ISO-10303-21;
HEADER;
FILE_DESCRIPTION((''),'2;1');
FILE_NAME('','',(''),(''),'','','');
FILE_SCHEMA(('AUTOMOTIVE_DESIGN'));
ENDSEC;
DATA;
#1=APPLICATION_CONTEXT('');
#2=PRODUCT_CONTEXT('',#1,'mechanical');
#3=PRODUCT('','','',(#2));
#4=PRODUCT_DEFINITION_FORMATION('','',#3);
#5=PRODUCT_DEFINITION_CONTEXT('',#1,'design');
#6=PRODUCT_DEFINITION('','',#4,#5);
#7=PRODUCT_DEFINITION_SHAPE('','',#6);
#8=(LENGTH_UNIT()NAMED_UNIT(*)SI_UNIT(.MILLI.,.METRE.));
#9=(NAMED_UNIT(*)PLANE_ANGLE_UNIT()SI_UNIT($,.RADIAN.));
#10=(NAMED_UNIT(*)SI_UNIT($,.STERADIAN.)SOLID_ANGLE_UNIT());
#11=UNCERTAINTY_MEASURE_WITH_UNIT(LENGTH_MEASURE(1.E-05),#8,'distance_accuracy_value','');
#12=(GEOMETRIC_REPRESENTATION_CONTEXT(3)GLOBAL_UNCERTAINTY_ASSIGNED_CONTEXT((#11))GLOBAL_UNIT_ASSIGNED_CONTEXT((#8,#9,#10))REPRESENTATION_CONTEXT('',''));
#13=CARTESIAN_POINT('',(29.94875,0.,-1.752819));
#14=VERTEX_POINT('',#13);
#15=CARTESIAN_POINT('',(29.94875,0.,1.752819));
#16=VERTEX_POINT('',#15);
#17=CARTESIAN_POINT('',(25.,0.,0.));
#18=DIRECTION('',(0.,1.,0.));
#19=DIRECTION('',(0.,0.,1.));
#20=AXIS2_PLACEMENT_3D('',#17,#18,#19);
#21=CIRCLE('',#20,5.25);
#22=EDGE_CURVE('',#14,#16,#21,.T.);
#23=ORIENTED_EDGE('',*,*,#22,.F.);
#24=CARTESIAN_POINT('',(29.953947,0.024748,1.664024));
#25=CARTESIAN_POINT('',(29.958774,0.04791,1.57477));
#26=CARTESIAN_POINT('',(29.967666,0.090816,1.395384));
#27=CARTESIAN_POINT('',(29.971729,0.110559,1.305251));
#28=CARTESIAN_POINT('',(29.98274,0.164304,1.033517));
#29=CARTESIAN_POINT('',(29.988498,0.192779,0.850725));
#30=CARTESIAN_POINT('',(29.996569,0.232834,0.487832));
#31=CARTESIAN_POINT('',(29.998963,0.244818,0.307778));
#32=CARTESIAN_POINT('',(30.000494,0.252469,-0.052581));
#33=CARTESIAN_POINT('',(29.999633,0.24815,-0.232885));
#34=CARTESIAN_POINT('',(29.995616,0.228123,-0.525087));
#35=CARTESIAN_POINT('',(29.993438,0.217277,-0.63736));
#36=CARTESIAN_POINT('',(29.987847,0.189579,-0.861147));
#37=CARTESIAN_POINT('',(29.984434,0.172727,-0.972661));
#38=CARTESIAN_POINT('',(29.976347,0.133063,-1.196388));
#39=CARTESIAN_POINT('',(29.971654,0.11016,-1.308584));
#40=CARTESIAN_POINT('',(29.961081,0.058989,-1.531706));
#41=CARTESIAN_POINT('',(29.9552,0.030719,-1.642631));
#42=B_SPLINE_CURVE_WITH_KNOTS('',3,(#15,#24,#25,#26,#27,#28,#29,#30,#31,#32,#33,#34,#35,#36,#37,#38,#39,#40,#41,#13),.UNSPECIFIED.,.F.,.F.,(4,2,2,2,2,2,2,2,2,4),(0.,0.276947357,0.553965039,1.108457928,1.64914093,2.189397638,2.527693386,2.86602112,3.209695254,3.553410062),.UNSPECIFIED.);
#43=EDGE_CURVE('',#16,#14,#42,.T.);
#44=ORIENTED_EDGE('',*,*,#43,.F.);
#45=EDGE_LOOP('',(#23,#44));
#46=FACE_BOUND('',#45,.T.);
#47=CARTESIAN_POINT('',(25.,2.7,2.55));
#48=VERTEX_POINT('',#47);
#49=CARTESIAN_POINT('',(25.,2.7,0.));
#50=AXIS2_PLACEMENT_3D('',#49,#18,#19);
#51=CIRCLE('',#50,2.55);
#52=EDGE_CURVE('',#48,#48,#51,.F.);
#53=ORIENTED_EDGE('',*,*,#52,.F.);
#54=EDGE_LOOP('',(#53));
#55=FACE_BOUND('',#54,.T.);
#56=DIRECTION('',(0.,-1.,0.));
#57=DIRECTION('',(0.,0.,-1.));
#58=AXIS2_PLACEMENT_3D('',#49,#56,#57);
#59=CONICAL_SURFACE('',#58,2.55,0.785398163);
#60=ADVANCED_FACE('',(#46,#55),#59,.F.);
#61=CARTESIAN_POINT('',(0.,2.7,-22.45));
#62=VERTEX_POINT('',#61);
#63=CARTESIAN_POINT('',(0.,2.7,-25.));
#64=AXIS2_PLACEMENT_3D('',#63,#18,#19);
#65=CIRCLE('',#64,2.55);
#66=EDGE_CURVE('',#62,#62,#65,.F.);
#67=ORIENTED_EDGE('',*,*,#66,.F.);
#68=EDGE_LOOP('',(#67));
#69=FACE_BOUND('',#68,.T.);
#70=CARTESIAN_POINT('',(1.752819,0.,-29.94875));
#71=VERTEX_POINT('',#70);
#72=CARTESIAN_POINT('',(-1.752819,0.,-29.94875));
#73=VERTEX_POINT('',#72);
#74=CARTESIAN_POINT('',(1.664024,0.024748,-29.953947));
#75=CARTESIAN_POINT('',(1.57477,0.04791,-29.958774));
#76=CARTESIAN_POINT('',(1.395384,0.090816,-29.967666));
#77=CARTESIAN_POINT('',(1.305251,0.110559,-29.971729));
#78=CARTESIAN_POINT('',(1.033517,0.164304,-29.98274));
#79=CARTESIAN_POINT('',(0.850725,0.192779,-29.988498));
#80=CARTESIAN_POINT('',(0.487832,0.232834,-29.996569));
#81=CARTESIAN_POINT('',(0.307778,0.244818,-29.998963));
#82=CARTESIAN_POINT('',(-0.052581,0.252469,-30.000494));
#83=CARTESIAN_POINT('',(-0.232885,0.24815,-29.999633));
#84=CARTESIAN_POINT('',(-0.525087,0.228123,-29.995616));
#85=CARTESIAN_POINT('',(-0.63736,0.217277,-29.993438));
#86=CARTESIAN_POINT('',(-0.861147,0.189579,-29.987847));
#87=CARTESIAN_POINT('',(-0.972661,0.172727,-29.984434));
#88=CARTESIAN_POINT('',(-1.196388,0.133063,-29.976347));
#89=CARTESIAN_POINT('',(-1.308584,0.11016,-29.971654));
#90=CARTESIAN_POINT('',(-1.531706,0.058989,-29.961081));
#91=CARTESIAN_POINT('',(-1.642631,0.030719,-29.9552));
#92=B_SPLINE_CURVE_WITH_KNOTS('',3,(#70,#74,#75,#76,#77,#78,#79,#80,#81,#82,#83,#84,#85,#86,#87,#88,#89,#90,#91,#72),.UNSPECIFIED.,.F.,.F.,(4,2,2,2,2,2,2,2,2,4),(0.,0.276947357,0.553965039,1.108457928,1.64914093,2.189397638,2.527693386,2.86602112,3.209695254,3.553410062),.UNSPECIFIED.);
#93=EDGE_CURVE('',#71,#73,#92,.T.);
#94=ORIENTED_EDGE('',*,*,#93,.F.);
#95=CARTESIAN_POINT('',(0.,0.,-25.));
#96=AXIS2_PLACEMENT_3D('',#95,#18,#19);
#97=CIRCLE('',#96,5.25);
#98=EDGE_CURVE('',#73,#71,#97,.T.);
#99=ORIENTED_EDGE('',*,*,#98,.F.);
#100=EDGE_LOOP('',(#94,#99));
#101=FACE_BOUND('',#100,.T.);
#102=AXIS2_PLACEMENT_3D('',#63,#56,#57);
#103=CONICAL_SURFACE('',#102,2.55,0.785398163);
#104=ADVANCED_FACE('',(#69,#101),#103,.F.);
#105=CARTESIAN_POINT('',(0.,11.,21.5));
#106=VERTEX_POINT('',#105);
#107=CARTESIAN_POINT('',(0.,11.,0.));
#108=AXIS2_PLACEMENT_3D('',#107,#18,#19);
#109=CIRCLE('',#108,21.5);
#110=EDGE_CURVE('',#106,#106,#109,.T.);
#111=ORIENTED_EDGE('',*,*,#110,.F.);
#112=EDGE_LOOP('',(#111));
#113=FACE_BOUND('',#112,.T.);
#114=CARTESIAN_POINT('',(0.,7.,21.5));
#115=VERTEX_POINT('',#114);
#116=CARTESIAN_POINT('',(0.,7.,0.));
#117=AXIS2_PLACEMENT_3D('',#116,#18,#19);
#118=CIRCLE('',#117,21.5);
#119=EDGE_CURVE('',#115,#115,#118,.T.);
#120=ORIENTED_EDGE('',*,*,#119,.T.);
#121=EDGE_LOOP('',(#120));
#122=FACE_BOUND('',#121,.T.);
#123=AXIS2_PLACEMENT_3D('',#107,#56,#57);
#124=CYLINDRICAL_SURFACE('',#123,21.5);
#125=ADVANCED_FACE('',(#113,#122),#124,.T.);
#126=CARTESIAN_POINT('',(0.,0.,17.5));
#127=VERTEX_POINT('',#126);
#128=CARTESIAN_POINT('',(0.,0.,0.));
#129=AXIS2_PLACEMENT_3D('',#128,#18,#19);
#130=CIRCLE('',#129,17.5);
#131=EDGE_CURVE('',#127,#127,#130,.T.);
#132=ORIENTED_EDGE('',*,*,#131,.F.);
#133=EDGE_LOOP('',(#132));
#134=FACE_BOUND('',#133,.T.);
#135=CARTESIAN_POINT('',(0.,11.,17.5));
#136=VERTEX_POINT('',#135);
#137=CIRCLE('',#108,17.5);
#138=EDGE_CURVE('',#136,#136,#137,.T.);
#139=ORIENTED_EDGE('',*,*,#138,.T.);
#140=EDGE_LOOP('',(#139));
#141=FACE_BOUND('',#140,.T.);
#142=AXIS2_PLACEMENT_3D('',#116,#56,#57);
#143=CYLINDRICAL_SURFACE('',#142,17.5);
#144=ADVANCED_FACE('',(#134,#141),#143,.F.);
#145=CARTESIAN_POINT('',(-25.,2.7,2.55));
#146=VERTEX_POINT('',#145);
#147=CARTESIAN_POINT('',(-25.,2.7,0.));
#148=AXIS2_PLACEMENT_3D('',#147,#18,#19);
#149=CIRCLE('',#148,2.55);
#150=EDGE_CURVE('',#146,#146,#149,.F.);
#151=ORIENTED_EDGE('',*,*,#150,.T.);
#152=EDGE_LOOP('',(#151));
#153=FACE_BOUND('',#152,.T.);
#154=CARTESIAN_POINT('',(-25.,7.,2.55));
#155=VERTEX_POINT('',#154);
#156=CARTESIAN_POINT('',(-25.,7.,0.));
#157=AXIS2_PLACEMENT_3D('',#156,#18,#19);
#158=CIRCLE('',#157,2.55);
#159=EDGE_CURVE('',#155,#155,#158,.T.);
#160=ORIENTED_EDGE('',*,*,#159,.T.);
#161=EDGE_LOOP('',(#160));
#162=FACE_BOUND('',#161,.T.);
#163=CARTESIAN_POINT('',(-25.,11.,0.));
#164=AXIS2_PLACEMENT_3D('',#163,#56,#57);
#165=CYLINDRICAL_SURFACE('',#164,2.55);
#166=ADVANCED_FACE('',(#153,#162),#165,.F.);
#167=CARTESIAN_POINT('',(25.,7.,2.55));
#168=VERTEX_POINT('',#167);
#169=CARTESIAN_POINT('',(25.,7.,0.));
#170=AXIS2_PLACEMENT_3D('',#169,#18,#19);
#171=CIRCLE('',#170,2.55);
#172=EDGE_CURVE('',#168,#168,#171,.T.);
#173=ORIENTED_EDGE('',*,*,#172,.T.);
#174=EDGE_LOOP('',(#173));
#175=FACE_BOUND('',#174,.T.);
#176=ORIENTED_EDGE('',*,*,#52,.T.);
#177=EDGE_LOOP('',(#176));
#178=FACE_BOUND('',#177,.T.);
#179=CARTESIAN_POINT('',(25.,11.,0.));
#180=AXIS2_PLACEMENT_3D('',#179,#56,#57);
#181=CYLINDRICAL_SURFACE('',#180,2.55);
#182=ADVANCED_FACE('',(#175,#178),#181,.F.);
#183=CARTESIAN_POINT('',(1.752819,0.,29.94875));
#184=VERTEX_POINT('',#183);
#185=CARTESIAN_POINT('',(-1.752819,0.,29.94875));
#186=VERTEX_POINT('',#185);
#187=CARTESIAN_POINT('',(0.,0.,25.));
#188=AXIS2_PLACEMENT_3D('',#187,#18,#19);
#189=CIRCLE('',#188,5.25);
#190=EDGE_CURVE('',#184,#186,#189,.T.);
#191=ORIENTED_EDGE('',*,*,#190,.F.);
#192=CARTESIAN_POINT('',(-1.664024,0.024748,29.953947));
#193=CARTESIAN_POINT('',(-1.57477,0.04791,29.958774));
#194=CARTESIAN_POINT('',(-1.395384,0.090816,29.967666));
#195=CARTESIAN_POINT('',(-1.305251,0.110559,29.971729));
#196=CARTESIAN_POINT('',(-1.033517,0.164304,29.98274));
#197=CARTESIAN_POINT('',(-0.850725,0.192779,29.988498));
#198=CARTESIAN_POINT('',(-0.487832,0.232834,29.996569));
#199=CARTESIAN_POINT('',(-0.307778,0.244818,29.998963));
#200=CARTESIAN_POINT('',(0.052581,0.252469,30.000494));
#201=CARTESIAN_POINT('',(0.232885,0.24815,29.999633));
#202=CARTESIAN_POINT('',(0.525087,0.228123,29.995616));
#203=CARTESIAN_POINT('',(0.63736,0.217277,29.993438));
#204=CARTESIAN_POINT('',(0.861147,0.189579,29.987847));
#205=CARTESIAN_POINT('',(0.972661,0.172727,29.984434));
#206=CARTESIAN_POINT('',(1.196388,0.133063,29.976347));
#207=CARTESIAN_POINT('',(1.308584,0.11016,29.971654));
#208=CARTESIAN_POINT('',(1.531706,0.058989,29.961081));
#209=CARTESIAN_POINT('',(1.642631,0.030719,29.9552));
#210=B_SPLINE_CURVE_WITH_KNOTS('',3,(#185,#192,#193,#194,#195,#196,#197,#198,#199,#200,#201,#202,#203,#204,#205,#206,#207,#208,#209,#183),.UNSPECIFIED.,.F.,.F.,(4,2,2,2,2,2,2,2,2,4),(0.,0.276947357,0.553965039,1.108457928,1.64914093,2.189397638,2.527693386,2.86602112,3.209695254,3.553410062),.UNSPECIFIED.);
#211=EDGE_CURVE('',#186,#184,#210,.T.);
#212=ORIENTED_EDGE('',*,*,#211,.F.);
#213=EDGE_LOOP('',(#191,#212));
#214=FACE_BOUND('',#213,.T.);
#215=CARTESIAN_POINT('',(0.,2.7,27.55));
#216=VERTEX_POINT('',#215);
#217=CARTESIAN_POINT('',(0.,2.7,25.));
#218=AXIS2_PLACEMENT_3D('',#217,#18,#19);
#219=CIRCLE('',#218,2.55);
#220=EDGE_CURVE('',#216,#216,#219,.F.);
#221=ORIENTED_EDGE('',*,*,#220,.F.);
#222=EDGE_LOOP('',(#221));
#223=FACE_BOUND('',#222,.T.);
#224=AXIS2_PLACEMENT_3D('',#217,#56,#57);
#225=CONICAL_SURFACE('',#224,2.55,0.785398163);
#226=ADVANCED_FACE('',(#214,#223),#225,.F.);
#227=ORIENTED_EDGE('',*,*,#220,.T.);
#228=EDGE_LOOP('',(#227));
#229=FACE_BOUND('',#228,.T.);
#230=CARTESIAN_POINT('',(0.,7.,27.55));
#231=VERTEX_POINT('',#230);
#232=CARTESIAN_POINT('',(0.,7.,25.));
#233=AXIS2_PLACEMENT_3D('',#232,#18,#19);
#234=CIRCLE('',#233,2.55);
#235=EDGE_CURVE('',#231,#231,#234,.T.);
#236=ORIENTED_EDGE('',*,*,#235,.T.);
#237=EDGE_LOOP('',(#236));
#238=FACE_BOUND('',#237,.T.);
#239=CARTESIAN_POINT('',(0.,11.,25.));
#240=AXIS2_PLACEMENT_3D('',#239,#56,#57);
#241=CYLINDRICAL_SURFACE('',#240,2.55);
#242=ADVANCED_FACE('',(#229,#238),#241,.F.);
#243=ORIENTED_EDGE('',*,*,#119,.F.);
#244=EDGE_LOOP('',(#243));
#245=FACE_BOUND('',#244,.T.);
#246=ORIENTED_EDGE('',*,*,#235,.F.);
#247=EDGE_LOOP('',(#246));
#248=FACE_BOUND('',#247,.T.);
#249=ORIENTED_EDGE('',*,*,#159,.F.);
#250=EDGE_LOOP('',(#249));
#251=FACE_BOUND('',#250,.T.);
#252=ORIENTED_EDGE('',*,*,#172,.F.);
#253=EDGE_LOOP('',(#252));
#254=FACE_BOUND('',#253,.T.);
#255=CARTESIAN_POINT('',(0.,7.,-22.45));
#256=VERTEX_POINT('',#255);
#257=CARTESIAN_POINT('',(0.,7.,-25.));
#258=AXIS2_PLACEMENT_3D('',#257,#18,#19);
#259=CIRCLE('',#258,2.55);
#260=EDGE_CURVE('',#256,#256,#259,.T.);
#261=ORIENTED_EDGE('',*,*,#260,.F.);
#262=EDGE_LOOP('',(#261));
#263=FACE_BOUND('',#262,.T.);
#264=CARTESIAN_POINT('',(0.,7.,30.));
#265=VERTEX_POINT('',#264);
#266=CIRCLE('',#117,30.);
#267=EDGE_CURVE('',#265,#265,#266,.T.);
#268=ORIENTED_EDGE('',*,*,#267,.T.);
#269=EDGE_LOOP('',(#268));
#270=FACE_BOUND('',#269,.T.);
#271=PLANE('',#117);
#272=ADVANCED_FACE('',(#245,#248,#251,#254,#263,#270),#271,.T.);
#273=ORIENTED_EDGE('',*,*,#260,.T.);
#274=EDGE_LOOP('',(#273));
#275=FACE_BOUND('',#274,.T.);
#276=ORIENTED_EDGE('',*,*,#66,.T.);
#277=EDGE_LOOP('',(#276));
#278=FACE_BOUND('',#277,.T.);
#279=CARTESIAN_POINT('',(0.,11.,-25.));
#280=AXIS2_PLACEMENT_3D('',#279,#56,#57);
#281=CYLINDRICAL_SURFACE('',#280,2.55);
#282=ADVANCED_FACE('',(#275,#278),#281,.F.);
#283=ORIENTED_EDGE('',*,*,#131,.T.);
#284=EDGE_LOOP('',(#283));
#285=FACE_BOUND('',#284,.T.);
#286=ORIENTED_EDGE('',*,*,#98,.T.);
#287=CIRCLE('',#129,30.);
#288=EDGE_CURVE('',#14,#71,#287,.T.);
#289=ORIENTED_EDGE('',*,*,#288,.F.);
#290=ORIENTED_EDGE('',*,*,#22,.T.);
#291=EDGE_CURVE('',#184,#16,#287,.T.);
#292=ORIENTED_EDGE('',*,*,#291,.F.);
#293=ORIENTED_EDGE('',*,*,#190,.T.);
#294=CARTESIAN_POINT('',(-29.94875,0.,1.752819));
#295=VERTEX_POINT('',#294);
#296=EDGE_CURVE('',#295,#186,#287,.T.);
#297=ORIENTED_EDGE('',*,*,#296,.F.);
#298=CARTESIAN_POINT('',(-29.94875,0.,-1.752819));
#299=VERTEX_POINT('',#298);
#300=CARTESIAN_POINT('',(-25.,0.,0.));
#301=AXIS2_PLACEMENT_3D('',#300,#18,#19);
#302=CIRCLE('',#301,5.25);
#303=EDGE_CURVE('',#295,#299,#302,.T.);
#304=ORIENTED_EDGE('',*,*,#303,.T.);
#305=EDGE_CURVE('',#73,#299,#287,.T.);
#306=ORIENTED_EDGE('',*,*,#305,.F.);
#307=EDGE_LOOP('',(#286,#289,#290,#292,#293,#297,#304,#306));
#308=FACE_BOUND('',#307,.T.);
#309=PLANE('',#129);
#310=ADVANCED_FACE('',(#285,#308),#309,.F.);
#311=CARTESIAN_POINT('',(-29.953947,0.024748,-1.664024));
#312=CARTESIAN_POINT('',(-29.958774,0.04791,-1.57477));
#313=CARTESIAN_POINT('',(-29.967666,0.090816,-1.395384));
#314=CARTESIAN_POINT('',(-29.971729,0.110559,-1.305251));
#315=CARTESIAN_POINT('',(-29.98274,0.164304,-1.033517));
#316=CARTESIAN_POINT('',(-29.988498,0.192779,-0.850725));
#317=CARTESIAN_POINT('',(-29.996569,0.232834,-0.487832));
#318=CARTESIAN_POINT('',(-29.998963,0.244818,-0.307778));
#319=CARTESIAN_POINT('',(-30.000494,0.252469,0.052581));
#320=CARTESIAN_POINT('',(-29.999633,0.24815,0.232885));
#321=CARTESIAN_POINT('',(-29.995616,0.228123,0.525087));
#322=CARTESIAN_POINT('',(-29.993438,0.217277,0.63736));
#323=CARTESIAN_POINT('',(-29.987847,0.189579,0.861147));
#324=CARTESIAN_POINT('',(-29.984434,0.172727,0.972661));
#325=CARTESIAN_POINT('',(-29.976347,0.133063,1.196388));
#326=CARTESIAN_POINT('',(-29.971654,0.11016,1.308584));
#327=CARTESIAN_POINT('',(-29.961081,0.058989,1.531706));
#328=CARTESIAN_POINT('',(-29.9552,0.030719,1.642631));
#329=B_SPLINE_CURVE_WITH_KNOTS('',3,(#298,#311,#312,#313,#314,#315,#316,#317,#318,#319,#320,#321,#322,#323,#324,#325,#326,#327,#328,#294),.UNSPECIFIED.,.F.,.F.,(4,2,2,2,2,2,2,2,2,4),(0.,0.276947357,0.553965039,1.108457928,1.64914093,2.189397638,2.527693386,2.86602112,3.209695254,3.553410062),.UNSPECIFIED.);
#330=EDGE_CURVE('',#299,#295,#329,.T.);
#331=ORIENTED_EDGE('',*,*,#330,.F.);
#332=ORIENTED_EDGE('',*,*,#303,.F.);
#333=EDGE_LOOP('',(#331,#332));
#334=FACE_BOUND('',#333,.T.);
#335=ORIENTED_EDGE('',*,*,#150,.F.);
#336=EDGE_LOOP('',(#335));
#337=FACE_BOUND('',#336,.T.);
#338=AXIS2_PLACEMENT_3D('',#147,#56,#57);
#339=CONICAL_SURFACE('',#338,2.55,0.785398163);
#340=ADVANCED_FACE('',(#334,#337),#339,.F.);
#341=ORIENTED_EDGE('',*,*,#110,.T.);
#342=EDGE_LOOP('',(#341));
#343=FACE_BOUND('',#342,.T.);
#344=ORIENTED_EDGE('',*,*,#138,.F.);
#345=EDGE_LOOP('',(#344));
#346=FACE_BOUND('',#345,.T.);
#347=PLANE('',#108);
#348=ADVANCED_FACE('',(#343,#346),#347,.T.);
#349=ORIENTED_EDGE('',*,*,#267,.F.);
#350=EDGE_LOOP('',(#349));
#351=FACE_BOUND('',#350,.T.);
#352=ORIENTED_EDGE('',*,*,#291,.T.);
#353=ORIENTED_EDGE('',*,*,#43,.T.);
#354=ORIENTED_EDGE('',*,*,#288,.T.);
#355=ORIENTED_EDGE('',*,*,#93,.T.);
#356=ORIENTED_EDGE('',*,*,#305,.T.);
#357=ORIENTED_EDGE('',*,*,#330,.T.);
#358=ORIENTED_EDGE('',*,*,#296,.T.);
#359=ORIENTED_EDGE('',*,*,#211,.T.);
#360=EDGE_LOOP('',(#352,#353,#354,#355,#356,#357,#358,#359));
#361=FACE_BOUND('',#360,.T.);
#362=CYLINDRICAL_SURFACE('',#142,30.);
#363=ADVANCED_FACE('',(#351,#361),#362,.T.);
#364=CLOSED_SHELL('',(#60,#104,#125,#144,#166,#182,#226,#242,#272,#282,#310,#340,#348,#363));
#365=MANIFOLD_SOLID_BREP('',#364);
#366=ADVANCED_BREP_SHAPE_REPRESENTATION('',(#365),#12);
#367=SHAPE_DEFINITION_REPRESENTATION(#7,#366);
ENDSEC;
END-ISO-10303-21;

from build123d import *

# Parameters (mm, degrees)
SKETCH1_R                    = 30
SKETCH1_R_2                  = 17.5
BOSS_EXTRUDE1_DEPTH          = 7
SKETCH2_R                    = 21.5
SKETCH2_R_2                  = 17.5
BOSS_EXTRUDE2_DEPTH          = 4
SKETCH4_R                    = 2.55
CUT_EXTRUDE1_DEPTH           = 44.829214002
CHAMFER1_SIZE                = 2.7
CIRPATTERN1_COUNT            = 4
CHAMFER1_OF_CIRPATTERN1_SIZE = 2.7


with BuildPart() as part:
    # Sketch1 → Boss-Extrude1 (new body)
    with BuildSketch(Plane(origin=(0, 0, 0), x_dir=(1, 0, 0), z_dir=(0, 1, 0))):
        with Locations(Location((0, 0, 0), (0, 0, 270))):
            Circle(SKETCH1_R)
        with Locations(Location((0, 0, 0), (0, 0, 270))):
            Circle(SKETCH1_R_2, mode=Mode.SUBTRACT)
    extrude(amount=BOSS_EXTRUDE1_DEPTH)

    # Sketch2 → Boss-Extrude2 (add)
    with BuildSketch(Plane(origin=(0, 7, 0), x_dir=(1, 0, 0), z_dir=(0, 1, 0))):
        with Locations(Location((0, 0, 0), (0, 0, 270))):
            Circle(SKETCH2_R)
        with Locations(Location((0, 0, 0), (0, 0, 270))):
            Circle(SKETCH2_R_2, mode=Mode.SUBTRACT)
    extrude(amount=BOSS_EXTRUDE2_DEPTH)

    # Sketch4 → Cut-Extrude1 (cut, through all)
    with BuildSketch(Plane.XZ):
        with Locations(Location((25, 0, 0), (0, 0, 270))):
            Circle(SKETCH4_R)
    cut_extrude1 = extrude(amount=-CUT_EXTRUDE1_DEPTH, mode=Mode.SUBTRACT)

    # Chamfer1
    # the kernel refuses this chamfer: 2.7 mm, written as the material it takes off along each edge
    with BuildSketch(Plane(origin=(25, 0, 0), x_dir=(0, 0, -1), z_dir=(-1, 0, 0))) as chamfer1_piece_1:
        Polygon((2.55 + CHAMFER1_SIZE, 0), (2.55, -CHAMFER1_SIZE), (2.55, 0), align=None)
    revolve(axis=Axis((25, 0, 0), (0, -1, 0)), mode=Mode.SUBTRACT)

    # CirPattern1: Cut-Extrude1 ×4 about axis
    cirpattern1_axis = Axis((0, 0, 0), (0, 1, 0))
    for i in range(1, CIRPATTERN1_COUNT):
        add(cut_extrude1.rotate(cirpattern1_axis, i * 360 / CIRPATTERN1_COUNT), mode=Mode.SUBTRACT)

    # Chamfer1 of CirPattern1
    # the kernel refuses this chamfer: 2.7 mm, written as the material it takes off along each edge
    with BuildSketch(Plane(origin=(0, 0, -25), x_dir=(-1, 0, 0), z_dir=(0, 0, 1))) as chamfer1_of_cirpattern1_piece_1:
        Polygon((2.55 + CHAMFER1_OF_CIRPATTERN1_SIZE, 0), (2.55, -CHAMFER1_OF_CIRPATTERN1_SIZE), (2.55, 0), align=None)
    revolve(axis=Axis((0, 0, -25), (0, -1, 0)), mode=Mode.SUBTRACT)
    with BuildSketch(Plane(origin=(-25, 0, 0), x_dir=(0, 0, 1), z_dir=(1, 0, 0))) as chamfer1_of_cirpattern1_piece_2:
        Polygon((2.55 + CHAMFER1_OF_CIRPATTERN1_SIZE, 0), (2.55, -CHAMFER1_OF_CIRPATTERN1_SIZE), (2.55, 0), align=None)
    revolve(axis=Axis((-25, 0, 0), (0, -1, 0)), mode=Mode.SUBTRACT)
    with BuildSketch(Plane(origin=(0, 0, 25), x_dir=(1, 0, 0), z_dir=(0, 0, -1))) as chamfer1_of_cirpattern1_piece_3:
        Polygon((2.55 + CHAMFER1_OF_CIRPATTERN1_SIZE, 0), (2.55, -CHAMFER1_OF_CIRPATTERN1_SIZE), (2.55, 0), align=None)
    revolve(axis=Axis((0, 0, 25), (0, -1, 0)), mode=Mode.SUBTRACT)


solid = part.part
